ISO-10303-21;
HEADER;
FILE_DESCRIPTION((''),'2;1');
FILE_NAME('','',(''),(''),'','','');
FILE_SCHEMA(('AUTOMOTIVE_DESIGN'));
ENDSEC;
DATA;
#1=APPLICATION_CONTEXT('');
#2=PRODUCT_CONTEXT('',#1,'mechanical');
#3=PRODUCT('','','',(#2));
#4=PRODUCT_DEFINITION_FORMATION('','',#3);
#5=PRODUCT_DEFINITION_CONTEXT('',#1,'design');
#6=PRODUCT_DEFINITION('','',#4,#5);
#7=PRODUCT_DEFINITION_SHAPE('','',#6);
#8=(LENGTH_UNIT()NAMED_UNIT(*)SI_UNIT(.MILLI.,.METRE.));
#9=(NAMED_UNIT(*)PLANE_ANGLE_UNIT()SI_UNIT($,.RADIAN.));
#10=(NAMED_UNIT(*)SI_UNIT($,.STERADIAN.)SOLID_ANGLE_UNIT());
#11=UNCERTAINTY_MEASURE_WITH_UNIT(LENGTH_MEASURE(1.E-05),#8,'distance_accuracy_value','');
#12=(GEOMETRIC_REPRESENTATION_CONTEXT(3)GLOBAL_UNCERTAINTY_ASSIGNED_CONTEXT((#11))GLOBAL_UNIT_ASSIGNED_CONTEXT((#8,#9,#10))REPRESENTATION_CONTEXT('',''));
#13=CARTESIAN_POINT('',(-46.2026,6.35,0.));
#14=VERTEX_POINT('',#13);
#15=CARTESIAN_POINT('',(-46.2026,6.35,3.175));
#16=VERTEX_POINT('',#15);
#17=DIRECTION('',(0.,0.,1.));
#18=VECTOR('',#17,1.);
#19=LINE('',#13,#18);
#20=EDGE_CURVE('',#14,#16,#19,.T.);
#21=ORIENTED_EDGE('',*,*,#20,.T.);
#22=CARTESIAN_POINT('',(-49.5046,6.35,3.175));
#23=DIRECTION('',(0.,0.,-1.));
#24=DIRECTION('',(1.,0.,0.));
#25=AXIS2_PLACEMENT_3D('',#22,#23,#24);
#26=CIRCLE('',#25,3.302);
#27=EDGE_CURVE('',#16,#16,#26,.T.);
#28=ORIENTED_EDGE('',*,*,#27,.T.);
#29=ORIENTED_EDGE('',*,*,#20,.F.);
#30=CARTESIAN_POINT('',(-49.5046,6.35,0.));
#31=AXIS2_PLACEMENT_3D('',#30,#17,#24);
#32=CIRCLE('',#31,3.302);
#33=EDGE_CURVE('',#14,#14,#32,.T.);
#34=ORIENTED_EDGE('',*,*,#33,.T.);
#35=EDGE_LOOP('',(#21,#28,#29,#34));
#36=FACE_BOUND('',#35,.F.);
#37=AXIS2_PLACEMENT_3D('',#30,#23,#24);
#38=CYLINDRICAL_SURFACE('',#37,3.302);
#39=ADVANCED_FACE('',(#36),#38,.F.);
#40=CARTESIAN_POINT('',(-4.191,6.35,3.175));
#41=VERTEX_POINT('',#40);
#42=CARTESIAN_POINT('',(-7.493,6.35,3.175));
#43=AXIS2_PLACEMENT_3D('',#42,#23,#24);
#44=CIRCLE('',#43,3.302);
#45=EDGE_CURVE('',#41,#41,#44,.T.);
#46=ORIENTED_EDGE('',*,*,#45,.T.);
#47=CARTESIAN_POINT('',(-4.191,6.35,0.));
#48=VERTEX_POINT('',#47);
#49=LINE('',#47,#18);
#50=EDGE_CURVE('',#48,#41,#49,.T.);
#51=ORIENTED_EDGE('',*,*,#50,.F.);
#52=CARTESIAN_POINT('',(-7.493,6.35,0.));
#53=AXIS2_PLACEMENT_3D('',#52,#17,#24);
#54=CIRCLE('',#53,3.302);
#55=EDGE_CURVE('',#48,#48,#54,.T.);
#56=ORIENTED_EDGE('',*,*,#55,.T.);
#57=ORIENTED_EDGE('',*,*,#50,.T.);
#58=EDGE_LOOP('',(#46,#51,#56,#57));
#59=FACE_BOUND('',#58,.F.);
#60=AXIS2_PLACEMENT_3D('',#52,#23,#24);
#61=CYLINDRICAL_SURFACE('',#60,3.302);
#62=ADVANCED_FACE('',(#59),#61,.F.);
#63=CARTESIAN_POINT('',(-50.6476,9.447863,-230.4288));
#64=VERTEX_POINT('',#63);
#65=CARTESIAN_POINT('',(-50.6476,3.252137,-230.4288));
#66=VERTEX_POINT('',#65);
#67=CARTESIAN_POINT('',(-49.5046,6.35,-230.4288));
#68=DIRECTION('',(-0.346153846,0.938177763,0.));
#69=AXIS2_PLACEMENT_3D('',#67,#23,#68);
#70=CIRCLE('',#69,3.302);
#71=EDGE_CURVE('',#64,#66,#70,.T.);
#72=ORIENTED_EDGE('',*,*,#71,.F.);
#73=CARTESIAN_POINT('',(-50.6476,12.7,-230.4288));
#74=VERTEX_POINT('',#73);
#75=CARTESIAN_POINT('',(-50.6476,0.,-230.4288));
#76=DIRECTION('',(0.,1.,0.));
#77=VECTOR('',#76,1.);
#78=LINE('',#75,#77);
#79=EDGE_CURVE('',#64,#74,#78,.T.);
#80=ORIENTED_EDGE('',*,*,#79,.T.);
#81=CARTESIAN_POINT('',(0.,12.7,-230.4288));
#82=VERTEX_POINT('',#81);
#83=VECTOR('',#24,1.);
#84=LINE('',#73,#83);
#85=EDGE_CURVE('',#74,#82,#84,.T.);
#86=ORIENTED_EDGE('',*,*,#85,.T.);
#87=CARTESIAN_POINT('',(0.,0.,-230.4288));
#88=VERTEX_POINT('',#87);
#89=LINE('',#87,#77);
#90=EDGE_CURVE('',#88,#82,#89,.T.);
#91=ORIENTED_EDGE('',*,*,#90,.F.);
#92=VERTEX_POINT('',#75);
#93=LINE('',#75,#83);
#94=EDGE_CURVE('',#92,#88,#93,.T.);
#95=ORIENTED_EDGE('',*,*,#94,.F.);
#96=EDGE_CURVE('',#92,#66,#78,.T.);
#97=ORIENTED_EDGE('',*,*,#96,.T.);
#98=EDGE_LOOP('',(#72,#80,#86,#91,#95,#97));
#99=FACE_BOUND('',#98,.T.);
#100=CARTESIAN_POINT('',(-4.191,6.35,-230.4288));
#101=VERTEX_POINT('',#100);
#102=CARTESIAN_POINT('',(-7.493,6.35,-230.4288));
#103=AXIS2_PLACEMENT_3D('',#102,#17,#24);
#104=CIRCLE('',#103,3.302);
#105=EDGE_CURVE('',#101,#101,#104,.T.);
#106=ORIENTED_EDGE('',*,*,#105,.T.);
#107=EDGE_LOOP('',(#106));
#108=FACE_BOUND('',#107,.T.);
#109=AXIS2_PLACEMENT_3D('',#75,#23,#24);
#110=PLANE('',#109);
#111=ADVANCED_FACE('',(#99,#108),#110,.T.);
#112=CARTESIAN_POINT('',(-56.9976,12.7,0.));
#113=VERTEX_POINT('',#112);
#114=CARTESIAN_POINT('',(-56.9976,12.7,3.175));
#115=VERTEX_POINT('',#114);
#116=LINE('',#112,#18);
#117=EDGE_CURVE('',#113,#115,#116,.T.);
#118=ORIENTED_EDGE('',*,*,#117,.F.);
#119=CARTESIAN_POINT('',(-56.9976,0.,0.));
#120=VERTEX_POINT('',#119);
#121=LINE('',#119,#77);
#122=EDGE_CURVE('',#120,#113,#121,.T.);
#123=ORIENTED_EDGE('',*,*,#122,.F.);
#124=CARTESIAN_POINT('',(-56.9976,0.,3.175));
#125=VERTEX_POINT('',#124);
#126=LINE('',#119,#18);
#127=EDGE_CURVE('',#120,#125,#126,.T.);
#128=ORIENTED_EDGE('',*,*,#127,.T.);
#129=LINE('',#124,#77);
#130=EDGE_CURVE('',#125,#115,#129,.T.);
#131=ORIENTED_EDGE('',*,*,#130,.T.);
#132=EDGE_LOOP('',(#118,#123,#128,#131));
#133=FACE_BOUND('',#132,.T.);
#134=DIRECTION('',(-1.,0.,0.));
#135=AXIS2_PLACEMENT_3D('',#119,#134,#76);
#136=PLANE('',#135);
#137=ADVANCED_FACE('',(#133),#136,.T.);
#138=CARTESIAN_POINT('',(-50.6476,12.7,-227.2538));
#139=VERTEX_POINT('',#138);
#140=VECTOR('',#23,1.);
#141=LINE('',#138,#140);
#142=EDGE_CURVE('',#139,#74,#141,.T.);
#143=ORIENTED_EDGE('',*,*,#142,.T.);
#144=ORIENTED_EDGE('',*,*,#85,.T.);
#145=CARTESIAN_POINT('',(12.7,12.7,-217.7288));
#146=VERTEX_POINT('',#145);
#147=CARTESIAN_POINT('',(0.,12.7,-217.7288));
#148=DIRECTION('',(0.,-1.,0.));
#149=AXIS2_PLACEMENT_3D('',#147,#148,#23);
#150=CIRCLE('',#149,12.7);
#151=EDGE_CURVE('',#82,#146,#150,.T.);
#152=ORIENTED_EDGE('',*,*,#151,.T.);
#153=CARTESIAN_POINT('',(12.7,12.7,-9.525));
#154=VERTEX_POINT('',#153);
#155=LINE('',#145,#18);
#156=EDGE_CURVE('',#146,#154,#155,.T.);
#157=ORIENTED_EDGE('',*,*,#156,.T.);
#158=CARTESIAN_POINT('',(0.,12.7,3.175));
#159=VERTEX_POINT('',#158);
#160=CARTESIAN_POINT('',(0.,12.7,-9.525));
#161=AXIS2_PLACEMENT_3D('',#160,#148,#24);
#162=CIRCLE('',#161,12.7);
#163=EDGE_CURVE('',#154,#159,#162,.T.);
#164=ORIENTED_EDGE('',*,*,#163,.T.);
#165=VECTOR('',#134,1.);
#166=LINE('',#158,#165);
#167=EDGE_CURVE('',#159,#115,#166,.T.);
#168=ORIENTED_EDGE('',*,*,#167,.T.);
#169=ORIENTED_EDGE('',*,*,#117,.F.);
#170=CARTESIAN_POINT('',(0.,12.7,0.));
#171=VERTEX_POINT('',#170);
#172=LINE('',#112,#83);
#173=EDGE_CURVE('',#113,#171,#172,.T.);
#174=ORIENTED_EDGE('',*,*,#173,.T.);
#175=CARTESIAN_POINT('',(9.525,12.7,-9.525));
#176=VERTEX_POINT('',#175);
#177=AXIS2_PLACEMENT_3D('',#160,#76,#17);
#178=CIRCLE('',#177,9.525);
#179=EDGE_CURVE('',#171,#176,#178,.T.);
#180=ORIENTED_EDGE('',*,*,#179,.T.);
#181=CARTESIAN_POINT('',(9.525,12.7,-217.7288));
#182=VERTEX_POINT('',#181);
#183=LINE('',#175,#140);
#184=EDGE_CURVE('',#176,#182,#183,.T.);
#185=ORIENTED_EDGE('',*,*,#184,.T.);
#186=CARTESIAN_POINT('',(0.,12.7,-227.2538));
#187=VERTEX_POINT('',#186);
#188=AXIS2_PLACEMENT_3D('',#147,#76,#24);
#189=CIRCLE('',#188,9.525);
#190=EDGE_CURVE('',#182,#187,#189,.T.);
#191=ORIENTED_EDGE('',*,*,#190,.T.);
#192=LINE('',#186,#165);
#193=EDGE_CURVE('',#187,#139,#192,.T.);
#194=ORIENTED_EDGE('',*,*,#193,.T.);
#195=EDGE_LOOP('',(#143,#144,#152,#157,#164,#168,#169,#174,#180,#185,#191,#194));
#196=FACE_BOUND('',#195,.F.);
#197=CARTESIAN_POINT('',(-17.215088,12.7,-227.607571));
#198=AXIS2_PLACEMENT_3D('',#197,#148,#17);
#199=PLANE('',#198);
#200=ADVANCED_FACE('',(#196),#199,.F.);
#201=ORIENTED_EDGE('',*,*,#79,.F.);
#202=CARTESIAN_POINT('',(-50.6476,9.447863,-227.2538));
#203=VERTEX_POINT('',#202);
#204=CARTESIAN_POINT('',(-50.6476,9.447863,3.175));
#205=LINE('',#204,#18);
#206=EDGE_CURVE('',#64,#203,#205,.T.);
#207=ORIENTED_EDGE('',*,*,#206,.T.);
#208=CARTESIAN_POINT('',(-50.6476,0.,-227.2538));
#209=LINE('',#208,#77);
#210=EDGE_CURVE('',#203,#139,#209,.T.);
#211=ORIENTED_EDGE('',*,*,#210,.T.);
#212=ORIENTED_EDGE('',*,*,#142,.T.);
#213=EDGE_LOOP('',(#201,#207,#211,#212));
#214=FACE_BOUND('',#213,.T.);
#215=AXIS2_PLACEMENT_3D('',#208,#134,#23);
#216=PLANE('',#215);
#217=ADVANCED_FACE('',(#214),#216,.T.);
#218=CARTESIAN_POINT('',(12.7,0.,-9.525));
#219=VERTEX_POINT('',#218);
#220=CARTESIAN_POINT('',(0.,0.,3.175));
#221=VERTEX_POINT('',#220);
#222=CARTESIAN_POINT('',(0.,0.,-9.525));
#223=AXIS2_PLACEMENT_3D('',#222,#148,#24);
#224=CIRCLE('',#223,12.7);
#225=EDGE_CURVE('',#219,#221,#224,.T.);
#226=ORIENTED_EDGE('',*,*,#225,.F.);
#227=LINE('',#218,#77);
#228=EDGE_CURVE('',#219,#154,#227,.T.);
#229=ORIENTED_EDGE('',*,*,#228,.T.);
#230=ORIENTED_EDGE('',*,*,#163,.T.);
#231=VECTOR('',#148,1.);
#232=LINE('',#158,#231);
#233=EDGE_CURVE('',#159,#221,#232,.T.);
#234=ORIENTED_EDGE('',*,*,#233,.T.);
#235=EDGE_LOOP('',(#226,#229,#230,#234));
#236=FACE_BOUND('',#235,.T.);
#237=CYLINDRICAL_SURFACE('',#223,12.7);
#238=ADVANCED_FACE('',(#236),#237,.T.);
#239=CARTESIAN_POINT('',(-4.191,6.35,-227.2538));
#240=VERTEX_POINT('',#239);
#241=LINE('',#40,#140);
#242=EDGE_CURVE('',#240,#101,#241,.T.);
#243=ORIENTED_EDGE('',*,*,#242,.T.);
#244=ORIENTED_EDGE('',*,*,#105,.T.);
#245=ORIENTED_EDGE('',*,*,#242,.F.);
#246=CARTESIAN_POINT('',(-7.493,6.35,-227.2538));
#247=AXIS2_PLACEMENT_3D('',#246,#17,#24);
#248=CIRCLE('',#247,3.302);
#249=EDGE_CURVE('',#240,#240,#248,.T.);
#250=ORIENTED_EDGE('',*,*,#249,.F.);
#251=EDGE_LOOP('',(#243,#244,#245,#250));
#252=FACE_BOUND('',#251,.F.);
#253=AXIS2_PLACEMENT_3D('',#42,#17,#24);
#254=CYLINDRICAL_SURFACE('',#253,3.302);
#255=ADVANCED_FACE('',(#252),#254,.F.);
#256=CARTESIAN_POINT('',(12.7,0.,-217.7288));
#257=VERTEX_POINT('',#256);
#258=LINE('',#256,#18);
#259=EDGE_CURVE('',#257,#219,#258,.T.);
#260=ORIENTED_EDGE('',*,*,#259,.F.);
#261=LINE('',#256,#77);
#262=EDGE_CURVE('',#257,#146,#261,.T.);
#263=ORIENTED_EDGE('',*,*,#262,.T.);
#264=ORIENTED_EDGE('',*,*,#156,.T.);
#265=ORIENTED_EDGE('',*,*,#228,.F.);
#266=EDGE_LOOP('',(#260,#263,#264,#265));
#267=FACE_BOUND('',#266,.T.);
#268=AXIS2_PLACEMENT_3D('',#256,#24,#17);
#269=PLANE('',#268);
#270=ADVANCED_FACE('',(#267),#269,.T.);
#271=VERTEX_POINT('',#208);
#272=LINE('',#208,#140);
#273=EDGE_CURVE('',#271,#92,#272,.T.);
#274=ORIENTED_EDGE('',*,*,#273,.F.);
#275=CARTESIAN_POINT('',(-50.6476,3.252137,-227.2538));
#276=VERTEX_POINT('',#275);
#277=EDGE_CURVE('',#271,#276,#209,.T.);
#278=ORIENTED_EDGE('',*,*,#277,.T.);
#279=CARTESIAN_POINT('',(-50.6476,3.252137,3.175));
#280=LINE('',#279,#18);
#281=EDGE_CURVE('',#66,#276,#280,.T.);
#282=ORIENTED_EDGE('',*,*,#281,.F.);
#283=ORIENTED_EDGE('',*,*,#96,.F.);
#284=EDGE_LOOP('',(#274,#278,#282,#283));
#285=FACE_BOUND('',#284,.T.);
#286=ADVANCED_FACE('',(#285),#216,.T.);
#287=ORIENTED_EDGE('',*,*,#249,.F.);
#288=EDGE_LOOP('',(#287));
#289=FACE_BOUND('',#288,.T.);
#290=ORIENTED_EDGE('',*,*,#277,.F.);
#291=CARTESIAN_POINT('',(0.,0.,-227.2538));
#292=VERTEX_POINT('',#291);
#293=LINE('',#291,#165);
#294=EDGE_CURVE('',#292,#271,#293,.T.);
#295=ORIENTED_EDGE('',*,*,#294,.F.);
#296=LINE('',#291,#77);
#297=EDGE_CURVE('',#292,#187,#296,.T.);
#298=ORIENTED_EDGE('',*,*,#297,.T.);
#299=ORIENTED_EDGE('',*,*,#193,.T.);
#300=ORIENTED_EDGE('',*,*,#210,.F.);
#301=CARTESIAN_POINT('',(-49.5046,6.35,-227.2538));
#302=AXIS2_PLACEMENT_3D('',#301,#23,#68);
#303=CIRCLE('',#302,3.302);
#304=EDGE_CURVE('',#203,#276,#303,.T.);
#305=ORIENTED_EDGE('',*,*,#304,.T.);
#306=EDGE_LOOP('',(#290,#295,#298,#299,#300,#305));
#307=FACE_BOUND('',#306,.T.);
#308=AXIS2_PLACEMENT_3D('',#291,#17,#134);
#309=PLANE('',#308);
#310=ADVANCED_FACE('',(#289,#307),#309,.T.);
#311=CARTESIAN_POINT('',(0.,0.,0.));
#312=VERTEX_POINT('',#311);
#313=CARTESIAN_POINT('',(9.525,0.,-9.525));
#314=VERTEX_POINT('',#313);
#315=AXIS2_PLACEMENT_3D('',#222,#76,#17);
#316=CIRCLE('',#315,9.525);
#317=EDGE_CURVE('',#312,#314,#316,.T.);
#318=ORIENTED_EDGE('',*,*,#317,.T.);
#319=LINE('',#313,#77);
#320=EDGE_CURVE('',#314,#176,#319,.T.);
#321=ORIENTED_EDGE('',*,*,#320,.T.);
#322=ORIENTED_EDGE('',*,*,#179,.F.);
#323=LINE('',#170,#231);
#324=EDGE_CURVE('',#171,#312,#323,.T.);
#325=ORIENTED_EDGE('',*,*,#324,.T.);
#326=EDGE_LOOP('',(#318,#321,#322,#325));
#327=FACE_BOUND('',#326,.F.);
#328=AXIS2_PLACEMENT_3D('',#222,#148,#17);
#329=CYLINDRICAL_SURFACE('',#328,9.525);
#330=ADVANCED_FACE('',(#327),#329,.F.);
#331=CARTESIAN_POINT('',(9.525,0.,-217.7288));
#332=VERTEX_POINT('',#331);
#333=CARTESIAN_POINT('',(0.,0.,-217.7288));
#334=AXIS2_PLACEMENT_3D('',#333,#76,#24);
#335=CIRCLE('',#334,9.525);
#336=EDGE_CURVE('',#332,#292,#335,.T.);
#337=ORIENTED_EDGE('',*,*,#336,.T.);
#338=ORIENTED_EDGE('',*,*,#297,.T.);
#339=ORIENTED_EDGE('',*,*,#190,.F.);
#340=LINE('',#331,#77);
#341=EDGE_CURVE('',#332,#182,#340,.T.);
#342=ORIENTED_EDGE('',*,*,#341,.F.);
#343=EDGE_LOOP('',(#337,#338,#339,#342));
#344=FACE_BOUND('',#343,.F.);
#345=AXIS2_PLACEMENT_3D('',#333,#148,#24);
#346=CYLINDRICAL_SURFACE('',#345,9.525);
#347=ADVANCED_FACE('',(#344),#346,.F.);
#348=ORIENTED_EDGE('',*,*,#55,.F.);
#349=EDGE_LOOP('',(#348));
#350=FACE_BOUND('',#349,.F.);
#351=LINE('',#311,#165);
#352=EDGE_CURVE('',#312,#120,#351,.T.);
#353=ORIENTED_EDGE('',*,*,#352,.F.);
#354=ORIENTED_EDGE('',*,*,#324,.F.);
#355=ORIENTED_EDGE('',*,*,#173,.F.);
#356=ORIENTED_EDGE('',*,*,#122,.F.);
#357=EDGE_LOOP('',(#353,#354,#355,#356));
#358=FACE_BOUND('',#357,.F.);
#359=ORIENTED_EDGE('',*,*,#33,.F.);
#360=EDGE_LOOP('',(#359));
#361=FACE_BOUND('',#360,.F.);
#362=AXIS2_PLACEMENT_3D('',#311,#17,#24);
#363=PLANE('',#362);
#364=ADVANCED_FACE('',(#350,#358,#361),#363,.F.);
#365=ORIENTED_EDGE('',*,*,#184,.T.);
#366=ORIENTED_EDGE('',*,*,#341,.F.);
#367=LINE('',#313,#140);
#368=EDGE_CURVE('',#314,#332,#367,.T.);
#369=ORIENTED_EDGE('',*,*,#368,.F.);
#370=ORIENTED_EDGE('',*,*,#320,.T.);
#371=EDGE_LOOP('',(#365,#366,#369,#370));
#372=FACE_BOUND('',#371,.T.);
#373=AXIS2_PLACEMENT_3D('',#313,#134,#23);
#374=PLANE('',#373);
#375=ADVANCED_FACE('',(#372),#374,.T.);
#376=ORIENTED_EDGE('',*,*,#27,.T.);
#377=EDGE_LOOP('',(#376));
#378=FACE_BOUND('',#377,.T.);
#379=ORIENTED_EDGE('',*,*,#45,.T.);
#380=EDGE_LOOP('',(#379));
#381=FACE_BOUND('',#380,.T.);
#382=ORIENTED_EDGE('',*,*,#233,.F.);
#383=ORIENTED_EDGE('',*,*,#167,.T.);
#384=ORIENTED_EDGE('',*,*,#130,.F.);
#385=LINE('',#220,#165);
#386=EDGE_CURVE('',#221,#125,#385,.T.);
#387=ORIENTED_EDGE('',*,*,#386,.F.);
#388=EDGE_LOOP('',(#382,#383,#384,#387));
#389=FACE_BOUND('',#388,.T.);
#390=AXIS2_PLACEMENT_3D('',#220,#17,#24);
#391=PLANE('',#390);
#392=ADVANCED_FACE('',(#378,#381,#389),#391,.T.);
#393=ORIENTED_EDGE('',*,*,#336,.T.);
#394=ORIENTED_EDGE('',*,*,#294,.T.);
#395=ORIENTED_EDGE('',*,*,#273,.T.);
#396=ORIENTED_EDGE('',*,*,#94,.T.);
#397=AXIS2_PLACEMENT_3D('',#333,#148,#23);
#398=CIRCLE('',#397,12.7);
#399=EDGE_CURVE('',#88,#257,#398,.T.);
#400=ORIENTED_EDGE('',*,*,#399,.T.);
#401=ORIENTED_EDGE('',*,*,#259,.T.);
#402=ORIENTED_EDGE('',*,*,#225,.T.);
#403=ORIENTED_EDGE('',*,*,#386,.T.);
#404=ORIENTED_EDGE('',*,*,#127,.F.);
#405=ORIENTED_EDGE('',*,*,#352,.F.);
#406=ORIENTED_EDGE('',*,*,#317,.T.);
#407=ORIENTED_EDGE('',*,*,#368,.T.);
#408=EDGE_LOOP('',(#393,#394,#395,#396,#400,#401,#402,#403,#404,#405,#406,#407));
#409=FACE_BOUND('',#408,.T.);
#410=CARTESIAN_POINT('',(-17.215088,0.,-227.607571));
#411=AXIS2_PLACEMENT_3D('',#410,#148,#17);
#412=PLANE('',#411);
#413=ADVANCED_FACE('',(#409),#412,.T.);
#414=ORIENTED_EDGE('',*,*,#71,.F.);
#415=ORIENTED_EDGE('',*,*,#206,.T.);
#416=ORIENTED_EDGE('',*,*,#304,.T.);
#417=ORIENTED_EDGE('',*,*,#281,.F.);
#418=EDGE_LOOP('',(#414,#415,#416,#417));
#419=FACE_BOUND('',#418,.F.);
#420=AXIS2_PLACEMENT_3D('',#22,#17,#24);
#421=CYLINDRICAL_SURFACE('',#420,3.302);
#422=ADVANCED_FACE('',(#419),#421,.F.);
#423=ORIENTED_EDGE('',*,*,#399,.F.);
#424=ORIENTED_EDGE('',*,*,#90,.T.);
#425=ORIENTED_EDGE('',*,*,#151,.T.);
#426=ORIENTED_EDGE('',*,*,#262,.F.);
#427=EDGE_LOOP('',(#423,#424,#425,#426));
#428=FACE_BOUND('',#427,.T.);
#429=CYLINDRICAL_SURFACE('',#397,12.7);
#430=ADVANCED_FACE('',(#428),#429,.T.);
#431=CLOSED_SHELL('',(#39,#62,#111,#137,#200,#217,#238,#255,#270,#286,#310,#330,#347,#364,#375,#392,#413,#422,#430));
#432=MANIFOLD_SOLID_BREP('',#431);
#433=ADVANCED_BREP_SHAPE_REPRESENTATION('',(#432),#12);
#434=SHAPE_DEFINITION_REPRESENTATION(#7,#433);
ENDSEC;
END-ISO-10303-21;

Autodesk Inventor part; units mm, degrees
ref_plane "YZ Plane" through (0, 0, 0) normal (1, 0, 0) x (0, 1, 0)
ref_plane "XZ Plane" through (0, 0, 0) normal (0, 1, 0) x (-1, 0, 0)
ref_plane "XY Plane" through (0, 0, 0) normal (0, 0, 1) x (1, 0, 0)
sketch "Sketch1" plane through (0, 0, 0) normal (0, 0, 1) x (1, 0, 0)
  line L0 (0, 0) -> (-56.9976, 0)
  line L1 (-56.9976, 0) -> (-56.9976, 12.7)
  line L2 (-56.9976, 12.7) -> (0, 12.7)
  line L3 (0, 12.7) -> (0, 0)
  line L4 (0, 12.7) -> (-7.493, 12.7)
  line L5 (-7.493, 12.7) -> (-7.493, 6.35)
  line L6 (-56.9976, 12.7) -> (-49.5046, 12.7)
  line L7 (-49.5046, 12.7) -> (-49.5046, 6.35)
  circle A0 centre (-49.5046, 6.35) radius 3.302
  circle A1 centre (-7.493, 6.35) radius 3.302
  dimension "d1" = 56.9976
  dimension "d2" = 12.7
  dimension "d3" = 7.493
  dimension "d4" = 6.35
  dimension "d5" = 7.493
  dimension "d6" = 6.604
  dimension "d7" = 6.604
  dimension "d19" = 6.35
extrude "Plate1" add sketch "Sketch1" along normal blind 3.175
sketch "Sketch3" plane through (9.525, 0, -9.525) normal (1, 0, 0) x (0, 1, 0)
  line L0 (12.7, 0) -> (0, 0)
  line L1 (0, 0) -> (0, -208.2038)
  line L2 (0, -208.2038) -> (12.7, -208.2038)
  line L3 (12.7, -208.2038) -> (12.7, 0)
edge flange "Flange2" height 220.9038 angle 90 thickness 3.175 bend radius 9.525 thickness toward (1, 0, 0) relief tear relief width 3.175 relief depth 1.5875 edges at (0, 6.35, 0) wall of the first edge with corners at (9.525, 12.7, -9.525) (9.525, 0, -9.525) (9.525, 0, -217.7288) (9.525, 12.7, -217.7288)
bend "Bend2"
corner "Corner2"
sketch "Sketch4" plane through (0, 0, -227.2538) normal (0, 0, -1) x (-1, 0, 0)
  line L0 (0, 12.7) -> (0, 0)
  line L1 (0, 0) -> (50.6476, 0)
  line L2 (50.6476, 0) -> (50.6476, 12.7)
  line L3 (50.6476, 12.7) -> (0, 12.7)
edge flange "Flange3" height 63.3476 angle 90 thickness 3.175 bend radius 9.525 thickness toward (0, 0, -1) relief tear relief width 3.175 relief depth 1.5875 edges at (9.525, 6.35, -217.7288) wall of the first edge with corners at (0, 12.7, -227.2538) (0, 0, -227.2538) (-50.6476, 0, -227.2538) (-50.6476, 12.7, -227.2538)
bend "Bend3"
corner "Corner3"
sketch "Sketch5" plane through (0, 0, 3.175) normal (0, 0, 1) x (1, 0, 0)
  circle A0 centre (-7.493, 6.35) radius 3.302 projected
  circle A1 centre (-49.5046, 6.35) radius 3.302 projected
extrude "Extrusion1" cut sketch "Sketch5" against normal blind 2286
equation "\"d20\" = BendReliefWidth"
equation "\"d21\" = BendReliefDepth"
equation "\"d22\" = MinimumRemnant"
equation "\"d23\" = BendRadius"
equation "\"d27\" = CornerReliefSize"
equation "\"d28\" = GapSize"
equation "\"d29\" = JacobiRadiusSize"
equation "\"d30\" = BendReliefWidth"
equation "\"d31\" = BendReliefDepth"
equation "\"d32\" = MinimumRemnant"
equation "\"d33\" = BendRadius"
equation "\"d37\" = CornerReliefSize"
equation "\"d38\" = GapSize"
equation "\"d39\" = JacobiRadiusSize"
equation "\"BendRadius\" = Thickness"
equation "\"BendReliefWidth\" = Thickness"
equation "\"BendReliefDepth\" = 0.5 * Thickness"
equation "\"CornerReliefSize\" = 4 * Thickness"
equation "\"MinimumRemnant\" = 2 * Thickness"
equation "\"TransitionRadius\" = BendRadius"
equation "\"JacobiRadiusSize\" = BendRadius"
equation "\"GapSize\" = Thickness"
equation "\"d8\" = BendRadius"
equation "\"Thickness\" = 3.175"
properties part number "tie-together tier 1" material "Aluminum 6061"
